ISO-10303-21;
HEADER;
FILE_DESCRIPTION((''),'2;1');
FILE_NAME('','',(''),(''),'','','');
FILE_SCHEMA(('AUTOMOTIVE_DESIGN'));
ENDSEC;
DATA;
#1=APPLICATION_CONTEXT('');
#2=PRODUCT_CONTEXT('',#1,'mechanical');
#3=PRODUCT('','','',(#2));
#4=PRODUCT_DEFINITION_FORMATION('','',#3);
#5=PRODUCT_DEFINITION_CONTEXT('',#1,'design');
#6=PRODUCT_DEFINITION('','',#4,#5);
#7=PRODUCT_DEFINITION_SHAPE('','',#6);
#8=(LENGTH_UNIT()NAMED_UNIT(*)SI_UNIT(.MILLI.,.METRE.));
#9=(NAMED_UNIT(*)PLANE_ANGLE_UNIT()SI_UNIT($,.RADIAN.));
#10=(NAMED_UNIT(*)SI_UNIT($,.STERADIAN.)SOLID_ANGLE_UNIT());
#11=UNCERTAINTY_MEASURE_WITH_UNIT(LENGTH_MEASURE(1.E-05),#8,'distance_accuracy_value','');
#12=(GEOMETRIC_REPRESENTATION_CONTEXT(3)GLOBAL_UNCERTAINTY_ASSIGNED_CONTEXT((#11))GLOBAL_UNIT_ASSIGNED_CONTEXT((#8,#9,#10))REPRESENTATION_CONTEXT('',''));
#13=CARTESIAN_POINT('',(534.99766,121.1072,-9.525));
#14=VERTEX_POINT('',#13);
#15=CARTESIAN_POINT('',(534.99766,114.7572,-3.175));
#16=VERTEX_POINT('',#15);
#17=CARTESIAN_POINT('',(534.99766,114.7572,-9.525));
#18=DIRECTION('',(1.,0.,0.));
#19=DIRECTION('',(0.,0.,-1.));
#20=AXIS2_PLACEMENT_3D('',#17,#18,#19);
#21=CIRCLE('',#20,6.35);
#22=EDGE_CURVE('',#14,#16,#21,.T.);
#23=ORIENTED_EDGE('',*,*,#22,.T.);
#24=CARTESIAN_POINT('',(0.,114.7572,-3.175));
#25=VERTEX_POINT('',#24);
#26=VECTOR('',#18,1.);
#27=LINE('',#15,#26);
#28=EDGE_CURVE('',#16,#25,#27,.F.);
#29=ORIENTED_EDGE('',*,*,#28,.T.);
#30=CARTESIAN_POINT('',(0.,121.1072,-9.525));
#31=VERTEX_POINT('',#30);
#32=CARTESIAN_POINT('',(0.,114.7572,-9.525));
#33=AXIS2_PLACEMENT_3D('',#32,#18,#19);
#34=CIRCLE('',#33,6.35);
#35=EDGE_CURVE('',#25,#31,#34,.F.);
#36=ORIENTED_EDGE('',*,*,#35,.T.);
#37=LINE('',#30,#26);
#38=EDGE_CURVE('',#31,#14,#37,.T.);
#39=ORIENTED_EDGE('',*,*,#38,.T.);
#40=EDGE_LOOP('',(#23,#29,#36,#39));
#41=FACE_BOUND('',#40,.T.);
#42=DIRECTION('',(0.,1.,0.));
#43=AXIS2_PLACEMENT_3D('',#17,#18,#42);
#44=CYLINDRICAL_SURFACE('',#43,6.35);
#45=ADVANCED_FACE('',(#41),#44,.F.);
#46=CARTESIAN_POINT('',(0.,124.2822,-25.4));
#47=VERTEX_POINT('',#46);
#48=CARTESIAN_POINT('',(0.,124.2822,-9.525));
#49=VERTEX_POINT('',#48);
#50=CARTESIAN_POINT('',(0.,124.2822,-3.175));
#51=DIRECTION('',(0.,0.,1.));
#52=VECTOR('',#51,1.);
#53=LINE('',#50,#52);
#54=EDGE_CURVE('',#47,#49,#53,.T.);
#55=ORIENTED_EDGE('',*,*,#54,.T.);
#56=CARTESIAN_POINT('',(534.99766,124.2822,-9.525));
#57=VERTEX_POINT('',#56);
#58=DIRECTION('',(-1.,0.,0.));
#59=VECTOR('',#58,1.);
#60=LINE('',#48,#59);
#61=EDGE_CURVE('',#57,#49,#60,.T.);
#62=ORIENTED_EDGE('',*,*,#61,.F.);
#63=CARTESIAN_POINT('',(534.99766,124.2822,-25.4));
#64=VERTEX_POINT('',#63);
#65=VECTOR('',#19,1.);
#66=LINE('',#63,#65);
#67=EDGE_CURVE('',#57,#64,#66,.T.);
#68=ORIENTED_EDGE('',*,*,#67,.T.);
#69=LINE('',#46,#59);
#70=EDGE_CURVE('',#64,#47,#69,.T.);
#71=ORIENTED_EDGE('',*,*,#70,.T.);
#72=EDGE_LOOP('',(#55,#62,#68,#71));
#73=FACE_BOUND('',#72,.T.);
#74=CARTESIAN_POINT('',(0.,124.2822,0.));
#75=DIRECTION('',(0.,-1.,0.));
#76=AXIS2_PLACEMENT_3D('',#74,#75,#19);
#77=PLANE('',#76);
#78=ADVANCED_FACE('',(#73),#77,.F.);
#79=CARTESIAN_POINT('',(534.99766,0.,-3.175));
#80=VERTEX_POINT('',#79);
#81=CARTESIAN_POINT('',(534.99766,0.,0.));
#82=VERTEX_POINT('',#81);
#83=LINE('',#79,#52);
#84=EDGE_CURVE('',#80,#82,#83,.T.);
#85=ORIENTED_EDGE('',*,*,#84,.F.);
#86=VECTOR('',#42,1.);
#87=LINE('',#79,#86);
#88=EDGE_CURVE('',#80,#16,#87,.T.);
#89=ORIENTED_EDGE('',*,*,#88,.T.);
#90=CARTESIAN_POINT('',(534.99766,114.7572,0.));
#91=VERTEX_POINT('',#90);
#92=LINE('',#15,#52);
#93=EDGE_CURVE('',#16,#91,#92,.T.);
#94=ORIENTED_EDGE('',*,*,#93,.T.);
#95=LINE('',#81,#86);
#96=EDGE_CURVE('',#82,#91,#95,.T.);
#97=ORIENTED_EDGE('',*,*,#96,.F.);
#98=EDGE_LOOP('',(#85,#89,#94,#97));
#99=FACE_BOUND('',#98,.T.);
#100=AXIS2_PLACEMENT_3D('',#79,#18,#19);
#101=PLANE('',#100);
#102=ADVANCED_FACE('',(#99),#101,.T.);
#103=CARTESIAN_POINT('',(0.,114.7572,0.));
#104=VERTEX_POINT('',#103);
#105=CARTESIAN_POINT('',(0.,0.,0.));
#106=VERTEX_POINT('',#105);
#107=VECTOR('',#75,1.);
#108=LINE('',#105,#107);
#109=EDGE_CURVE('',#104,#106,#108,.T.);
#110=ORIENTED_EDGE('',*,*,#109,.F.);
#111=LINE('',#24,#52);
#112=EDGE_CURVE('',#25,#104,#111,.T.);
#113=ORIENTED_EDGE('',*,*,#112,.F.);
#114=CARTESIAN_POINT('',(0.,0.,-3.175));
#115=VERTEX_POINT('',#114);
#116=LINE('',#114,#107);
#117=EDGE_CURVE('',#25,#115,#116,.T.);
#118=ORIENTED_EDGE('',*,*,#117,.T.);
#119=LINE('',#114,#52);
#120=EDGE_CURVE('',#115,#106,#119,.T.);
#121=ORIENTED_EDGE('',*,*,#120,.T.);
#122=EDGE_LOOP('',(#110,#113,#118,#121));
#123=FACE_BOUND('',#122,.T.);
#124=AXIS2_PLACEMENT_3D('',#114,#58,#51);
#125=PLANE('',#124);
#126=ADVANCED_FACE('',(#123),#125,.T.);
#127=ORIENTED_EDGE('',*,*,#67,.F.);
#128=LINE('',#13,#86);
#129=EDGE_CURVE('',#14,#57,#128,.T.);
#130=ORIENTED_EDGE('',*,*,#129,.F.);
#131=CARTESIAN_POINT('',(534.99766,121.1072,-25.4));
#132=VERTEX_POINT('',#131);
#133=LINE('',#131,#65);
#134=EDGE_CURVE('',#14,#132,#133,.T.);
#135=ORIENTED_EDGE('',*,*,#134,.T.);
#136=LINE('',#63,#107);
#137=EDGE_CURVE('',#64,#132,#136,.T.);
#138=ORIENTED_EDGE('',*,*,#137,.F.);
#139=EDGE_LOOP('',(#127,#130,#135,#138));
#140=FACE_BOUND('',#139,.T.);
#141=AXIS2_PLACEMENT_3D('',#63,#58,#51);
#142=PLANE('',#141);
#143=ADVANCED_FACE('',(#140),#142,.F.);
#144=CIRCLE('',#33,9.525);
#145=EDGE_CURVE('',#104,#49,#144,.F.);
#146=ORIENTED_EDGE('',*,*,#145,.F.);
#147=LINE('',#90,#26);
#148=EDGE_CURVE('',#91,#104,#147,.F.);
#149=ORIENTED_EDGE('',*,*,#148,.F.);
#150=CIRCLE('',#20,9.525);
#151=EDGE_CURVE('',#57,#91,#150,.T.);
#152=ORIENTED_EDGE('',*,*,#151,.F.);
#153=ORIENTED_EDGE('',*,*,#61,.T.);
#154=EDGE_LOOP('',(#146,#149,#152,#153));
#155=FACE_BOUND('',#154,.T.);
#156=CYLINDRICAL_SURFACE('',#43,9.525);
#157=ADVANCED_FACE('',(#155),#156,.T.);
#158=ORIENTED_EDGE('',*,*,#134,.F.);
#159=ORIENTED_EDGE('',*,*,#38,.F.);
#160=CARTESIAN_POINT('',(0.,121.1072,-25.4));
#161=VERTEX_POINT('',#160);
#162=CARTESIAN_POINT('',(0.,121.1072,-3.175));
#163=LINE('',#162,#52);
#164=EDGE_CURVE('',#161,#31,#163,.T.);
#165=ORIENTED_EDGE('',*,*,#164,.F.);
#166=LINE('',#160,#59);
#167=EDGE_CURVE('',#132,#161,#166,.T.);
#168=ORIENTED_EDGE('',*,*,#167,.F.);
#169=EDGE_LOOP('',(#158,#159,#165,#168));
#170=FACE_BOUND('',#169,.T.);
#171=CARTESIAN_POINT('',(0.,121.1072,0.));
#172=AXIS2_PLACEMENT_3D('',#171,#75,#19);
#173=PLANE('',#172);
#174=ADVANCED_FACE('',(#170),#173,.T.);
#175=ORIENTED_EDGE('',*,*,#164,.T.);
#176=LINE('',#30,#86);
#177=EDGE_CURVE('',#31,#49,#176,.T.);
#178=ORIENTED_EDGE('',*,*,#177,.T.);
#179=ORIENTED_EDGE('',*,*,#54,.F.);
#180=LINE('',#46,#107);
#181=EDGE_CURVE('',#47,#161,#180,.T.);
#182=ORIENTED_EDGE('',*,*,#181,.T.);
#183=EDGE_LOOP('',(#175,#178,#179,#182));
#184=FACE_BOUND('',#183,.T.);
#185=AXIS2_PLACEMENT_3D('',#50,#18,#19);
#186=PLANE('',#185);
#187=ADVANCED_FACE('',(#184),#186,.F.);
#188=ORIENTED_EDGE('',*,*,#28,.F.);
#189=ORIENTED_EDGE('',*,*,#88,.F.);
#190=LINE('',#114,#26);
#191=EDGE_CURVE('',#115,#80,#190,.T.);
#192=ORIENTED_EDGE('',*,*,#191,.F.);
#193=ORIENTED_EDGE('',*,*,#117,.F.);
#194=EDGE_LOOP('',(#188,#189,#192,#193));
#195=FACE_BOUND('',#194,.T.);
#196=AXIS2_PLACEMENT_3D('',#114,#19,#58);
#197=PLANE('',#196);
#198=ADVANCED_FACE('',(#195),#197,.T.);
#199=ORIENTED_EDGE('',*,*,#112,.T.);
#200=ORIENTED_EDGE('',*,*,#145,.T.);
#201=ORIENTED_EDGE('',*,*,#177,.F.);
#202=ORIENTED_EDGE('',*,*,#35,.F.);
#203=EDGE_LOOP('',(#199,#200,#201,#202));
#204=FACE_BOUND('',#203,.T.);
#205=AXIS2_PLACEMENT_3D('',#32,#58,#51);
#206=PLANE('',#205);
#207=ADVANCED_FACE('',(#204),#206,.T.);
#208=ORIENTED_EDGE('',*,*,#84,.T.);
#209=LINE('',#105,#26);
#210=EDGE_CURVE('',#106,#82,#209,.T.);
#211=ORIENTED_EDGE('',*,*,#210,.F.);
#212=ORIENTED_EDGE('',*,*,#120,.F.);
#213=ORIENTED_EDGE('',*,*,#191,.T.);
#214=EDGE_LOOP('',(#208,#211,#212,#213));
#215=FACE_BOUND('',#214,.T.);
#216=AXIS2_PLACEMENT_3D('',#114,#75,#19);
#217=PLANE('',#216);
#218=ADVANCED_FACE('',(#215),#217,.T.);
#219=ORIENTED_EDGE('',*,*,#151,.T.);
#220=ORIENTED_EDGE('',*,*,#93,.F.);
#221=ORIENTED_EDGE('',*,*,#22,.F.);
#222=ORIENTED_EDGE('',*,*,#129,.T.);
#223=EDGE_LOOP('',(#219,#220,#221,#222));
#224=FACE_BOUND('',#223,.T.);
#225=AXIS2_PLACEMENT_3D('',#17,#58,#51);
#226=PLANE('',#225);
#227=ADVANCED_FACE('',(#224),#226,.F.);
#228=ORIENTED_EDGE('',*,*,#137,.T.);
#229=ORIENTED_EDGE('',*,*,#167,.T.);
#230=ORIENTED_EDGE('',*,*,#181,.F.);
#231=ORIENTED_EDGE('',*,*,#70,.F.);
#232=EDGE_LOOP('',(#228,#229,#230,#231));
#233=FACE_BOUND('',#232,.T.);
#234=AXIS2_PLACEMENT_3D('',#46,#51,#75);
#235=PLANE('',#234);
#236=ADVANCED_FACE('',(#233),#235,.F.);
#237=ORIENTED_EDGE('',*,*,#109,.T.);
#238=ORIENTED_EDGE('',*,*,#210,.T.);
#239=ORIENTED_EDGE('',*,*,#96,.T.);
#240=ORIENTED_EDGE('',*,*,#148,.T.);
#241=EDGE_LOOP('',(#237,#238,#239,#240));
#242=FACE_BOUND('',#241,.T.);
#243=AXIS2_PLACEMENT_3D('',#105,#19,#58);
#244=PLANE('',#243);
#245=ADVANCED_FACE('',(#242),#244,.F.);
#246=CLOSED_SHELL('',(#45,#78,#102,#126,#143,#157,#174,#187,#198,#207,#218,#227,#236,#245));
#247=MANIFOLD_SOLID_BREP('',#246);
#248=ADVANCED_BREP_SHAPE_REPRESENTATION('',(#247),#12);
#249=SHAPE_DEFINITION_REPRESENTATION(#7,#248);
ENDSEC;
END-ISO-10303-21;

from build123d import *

# Parameters (mm, degrees)
SKETCH1_W                    = 534.99766
SKETCH1_H                    = 121.1072
BASE_FLANGE1_DEPTH           = 3.175
EDGE_FLANGE1_STRIP_W         = 25.4
EDGE_FLANGE1_STRIP_H         = 3.175
EDGE_FLANGE1_STRIP_CUT_DEPTH = 534.99766
EDGE_FLANGE1_DEPTH           = 534.99766


# Sheet-metal steps are written as plain solids
with BuildPart() as part:
    # Sketch1 → Base-Flange1 (new body)
    with BuildSketch(Plane.XY):
        with Locations((267.49883, 60.5536)):
            Rectangle(SKETCH1_W, SKETCH1_H)
    extrude(amount=-BASE_FLANGE1_DEPTH)

    # Edge-Flange1 strip (across the edge) → Edge-Flange1 strip cut (cut)
    with BuildSketch(Plane(origin=(0, 121.1072, -3.175), x_dir=(0, -1, 0), z_dir=(1, 0, 0))):
        with Locations((-6.35, -1.5875)):
            Rectangle(EDGE_FLANGE1_STRIP_W, EDGE_FLANGE1_STRIP_H)
    extrude(amount=EDGE_FLANGE1_STRIP_CUT_DEPTH, mode=Mode.SUBTRACT)

    # Edge-Flange1 section (across the edge) → Edge-Flange1 (add)
    with BuildSketch(Plane(origin=(0, 121.1072, -3.175), x_dir=(0, -1, 0), z_dir=(1, 0, 0))):
        with BuildLine():
            Line((-3.175, 6.35), (-3.175, 22.225))
            Line((-3.175, 22.225), (0, 22.225))
            Line((0, 22.225), (0, 6.35))
            ThreePointArc((0, 6.35), (1.859871939, 1.859871939), (6.35, 0))
            Line((6.35, 0), (6.35, -3.175))
            ThreePointArc((6.35, -3.175), (-0.385192091, -0.385192091), (-3.175, 6.35))
        make_face()
    extrude(amount=EDGE_FLANGE1_DEPTH)


solid = part.part
